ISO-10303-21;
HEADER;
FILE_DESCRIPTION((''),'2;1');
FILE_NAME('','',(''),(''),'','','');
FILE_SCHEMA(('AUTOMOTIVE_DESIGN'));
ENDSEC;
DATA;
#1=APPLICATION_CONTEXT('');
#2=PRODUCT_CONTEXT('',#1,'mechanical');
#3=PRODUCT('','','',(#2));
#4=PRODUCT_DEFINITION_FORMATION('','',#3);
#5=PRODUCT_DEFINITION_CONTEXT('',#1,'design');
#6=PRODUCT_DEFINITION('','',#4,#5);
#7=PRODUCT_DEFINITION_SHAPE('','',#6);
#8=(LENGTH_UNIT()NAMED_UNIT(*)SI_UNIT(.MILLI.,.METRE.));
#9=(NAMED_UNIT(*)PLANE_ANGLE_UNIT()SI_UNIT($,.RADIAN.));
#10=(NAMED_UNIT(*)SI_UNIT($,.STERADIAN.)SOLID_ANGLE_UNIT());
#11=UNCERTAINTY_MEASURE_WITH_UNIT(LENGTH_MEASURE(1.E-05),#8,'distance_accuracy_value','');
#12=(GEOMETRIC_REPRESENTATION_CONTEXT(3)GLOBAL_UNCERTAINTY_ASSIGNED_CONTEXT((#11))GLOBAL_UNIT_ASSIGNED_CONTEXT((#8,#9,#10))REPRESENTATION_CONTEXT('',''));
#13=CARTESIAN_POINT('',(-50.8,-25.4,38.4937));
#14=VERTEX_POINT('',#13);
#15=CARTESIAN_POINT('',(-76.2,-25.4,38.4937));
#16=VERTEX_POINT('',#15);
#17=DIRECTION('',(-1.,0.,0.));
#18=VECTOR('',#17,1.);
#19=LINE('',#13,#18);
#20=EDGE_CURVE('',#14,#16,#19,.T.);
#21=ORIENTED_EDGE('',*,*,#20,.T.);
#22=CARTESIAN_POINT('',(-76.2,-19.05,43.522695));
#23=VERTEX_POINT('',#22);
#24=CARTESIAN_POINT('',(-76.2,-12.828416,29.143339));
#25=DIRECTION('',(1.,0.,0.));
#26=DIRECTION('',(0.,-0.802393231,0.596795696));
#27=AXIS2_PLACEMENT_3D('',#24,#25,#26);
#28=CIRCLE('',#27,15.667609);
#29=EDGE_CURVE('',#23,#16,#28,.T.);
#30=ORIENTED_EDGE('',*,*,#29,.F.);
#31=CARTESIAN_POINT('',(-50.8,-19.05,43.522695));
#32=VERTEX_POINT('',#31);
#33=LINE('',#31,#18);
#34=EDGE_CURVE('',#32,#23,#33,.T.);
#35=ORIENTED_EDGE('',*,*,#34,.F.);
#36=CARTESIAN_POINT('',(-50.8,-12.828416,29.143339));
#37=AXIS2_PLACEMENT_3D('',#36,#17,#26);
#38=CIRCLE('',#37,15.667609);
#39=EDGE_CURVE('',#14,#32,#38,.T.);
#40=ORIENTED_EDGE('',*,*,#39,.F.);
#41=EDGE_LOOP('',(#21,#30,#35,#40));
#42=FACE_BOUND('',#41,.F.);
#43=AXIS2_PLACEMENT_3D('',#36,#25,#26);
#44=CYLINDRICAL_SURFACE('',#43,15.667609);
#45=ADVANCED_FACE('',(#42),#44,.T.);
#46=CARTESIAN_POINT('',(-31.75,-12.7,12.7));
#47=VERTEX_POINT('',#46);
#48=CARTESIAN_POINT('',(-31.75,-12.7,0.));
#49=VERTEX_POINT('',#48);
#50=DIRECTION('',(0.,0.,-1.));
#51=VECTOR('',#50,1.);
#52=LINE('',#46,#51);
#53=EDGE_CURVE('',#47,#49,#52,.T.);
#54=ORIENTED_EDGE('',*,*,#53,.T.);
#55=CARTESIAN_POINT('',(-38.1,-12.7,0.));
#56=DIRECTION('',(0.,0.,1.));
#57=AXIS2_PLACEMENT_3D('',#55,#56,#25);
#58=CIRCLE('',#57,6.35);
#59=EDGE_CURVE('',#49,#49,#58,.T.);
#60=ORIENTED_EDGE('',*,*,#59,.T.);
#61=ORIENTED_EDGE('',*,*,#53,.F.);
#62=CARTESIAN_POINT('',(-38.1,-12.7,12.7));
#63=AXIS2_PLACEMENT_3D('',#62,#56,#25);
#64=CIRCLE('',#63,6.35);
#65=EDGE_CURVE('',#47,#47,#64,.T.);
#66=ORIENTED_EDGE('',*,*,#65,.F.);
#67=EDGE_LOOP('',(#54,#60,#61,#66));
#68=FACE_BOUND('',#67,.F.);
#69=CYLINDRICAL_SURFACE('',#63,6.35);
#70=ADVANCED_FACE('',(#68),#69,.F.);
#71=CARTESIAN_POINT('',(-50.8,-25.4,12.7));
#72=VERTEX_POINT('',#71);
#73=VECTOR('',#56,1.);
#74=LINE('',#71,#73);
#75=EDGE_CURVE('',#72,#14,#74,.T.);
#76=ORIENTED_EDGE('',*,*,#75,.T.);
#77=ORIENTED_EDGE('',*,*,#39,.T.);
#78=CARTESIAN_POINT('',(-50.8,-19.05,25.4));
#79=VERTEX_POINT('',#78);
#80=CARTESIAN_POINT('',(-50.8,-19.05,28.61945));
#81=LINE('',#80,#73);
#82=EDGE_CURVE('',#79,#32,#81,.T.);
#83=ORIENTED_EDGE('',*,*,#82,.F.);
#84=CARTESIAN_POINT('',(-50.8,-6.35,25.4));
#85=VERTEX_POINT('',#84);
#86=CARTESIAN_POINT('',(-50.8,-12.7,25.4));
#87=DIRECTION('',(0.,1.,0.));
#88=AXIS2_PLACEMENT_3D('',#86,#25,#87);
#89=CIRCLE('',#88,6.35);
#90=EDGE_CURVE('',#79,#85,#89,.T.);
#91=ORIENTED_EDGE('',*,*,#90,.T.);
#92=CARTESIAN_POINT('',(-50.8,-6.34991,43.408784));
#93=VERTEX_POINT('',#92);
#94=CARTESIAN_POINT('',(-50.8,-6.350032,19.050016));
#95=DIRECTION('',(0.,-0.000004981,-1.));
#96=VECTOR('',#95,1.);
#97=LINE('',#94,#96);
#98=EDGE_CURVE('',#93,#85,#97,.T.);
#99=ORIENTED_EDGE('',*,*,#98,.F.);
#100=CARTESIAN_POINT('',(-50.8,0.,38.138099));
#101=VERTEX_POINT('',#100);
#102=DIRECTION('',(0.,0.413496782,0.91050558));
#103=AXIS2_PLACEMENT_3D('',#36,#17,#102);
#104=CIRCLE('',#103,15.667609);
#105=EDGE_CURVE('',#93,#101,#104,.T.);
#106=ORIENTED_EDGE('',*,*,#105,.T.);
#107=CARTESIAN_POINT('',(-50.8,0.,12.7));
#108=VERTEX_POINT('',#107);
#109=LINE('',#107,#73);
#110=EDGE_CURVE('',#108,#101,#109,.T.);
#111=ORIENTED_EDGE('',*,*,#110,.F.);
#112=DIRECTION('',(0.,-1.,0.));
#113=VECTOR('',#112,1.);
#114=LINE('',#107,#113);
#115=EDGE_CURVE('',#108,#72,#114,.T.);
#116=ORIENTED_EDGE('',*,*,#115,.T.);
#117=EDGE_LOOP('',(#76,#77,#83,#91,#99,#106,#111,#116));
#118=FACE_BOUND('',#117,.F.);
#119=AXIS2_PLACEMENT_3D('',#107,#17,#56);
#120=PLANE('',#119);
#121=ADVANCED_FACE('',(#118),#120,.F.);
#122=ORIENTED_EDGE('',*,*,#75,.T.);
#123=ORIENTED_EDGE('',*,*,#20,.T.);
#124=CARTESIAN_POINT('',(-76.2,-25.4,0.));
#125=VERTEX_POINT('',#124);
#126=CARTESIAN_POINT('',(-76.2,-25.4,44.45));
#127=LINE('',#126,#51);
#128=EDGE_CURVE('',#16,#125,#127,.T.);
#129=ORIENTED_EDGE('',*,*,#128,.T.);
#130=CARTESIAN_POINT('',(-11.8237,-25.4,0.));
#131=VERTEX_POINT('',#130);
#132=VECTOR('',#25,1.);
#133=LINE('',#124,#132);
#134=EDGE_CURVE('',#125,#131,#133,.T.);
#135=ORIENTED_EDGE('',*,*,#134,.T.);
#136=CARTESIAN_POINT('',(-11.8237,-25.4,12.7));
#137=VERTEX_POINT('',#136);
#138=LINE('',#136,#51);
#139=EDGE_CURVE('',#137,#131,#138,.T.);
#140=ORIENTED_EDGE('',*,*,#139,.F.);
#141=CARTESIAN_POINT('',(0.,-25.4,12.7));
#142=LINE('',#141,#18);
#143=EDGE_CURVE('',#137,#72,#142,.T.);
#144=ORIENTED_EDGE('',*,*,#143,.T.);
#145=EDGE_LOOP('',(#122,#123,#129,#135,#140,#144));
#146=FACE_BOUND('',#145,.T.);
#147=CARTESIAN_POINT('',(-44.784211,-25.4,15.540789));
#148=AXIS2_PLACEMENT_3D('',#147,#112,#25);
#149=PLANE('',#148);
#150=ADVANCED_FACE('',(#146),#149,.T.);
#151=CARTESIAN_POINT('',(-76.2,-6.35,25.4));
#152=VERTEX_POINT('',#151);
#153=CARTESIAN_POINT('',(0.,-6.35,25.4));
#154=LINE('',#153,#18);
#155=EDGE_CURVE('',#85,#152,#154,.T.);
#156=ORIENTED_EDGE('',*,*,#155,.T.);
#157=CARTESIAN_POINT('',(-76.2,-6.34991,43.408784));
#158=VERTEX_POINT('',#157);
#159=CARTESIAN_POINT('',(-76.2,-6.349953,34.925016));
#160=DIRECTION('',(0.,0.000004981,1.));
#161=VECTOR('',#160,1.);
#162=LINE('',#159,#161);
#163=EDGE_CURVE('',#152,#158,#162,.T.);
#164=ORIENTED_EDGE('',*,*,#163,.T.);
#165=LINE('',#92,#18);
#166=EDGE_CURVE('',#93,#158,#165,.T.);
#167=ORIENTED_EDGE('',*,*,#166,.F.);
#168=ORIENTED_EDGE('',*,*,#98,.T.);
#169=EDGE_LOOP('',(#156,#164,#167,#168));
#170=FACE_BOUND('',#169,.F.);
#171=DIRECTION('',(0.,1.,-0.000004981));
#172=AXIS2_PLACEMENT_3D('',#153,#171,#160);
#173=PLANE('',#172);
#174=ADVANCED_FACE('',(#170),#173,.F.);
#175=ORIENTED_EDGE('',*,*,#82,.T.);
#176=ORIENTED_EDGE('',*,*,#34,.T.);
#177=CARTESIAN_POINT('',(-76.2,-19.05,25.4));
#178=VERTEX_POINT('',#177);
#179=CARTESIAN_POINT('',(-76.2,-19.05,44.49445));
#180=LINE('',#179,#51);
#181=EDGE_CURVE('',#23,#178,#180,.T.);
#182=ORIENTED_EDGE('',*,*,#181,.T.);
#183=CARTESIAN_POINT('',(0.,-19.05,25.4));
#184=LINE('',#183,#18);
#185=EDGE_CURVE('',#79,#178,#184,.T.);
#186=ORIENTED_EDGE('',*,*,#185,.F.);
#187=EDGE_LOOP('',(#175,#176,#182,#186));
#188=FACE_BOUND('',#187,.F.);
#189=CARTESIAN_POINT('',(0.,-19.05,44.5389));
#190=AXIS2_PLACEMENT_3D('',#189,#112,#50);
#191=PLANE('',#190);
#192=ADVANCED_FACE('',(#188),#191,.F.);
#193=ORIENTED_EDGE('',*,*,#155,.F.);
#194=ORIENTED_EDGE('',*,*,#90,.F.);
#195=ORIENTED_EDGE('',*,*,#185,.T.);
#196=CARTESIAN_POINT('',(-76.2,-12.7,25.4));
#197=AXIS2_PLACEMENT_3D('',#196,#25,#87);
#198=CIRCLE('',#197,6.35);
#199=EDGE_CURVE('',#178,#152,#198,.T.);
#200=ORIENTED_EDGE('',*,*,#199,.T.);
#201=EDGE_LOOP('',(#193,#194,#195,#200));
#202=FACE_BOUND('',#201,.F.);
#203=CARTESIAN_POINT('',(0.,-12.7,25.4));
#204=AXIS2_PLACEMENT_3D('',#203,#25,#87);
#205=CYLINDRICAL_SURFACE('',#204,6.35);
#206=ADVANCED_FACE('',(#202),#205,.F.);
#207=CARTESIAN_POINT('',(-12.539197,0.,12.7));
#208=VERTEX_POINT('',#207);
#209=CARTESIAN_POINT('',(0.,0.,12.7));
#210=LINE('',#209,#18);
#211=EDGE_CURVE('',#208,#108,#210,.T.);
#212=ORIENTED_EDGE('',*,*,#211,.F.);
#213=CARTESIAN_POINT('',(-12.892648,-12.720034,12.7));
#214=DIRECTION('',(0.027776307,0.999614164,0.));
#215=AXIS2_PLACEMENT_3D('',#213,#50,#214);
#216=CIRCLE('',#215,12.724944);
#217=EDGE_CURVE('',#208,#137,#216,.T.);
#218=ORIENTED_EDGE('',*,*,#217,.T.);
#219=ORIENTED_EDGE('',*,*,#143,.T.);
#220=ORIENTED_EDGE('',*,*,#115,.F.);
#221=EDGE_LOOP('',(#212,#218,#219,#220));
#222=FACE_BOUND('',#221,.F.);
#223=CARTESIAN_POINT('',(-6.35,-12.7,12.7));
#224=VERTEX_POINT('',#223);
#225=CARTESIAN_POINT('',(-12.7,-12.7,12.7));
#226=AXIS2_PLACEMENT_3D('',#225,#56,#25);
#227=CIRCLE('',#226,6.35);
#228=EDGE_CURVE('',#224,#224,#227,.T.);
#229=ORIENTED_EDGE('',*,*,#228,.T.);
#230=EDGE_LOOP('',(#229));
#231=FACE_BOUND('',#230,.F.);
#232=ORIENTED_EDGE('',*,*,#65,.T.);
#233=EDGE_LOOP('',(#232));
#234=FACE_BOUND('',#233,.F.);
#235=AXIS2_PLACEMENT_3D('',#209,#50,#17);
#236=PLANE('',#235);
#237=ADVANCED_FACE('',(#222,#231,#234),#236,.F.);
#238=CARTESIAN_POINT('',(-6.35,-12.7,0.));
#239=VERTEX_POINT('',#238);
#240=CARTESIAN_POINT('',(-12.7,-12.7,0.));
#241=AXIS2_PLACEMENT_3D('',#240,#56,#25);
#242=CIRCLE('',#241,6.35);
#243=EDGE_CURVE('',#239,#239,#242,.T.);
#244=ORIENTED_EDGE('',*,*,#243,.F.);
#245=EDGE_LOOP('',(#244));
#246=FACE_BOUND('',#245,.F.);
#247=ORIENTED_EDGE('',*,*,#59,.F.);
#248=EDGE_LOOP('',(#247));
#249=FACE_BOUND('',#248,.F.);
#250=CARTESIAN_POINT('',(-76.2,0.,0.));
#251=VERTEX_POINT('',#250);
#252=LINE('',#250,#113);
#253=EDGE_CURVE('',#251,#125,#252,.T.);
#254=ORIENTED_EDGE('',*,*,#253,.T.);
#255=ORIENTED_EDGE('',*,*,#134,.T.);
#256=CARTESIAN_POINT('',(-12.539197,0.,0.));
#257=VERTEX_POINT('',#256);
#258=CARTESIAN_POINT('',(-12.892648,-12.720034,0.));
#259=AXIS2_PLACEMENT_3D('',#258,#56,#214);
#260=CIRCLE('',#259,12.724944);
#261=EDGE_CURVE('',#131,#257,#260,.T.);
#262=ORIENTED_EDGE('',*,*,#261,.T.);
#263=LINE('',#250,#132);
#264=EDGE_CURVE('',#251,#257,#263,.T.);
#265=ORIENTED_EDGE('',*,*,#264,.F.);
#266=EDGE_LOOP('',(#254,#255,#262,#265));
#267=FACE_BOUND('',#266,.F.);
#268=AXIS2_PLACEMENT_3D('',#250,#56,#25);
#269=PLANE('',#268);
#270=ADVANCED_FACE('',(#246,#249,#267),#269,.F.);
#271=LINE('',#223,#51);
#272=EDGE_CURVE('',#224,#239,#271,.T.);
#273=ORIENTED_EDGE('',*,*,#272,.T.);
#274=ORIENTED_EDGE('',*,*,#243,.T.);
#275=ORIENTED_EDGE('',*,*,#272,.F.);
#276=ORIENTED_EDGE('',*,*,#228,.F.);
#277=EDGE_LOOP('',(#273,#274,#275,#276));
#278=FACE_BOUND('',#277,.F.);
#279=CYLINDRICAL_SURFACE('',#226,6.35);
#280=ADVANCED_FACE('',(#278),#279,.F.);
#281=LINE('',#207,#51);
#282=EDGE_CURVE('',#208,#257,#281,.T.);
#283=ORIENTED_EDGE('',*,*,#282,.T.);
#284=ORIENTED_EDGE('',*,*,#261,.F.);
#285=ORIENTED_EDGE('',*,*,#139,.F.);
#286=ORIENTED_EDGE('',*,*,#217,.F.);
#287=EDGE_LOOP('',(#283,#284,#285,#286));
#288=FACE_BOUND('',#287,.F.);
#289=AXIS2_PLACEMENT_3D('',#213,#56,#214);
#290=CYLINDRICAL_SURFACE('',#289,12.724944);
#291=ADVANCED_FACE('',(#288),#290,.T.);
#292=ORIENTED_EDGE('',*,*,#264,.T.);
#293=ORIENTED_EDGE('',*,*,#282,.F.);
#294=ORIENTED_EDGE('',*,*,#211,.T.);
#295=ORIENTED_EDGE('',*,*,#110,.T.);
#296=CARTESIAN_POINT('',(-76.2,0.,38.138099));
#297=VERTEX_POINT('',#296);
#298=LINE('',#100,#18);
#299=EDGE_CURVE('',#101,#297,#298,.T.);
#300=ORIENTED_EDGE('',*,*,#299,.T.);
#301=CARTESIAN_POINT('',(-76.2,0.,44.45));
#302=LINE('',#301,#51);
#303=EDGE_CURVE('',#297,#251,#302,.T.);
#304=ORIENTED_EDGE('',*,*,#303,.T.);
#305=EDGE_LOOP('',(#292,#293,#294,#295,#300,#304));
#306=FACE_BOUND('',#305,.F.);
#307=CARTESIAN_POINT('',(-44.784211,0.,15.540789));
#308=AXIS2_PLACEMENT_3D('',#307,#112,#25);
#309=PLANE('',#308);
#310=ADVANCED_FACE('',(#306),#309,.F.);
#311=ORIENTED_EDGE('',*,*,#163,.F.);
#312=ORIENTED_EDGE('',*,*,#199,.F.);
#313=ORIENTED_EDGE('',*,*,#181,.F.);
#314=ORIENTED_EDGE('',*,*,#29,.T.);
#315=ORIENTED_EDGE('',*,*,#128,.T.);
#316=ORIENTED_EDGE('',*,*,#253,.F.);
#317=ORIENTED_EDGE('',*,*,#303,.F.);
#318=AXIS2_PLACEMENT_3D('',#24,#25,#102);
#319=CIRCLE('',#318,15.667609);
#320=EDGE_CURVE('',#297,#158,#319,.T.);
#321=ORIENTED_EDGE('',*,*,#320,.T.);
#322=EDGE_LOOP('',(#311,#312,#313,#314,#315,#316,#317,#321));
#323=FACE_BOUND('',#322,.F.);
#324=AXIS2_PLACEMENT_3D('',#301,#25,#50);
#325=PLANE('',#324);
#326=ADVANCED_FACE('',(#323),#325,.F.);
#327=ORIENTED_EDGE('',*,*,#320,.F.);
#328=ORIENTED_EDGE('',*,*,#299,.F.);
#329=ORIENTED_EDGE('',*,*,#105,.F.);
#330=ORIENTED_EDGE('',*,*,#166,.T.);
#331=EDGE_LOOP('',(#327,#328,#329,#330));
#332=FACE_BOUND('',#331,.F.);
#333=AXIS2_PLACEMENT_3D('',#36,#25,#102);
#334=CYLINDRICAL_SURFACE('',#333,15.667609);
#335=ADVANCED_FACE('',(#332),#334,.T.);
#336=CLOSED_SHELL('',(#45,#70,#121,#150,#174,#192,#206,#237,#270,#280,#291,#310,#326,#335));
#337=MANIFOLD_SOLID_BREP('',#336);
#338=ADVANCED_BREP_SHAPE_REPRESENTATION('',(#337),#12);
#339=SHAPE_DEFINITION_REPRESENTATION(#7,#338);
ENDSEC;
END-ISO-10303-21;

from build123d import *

# Parameters (mm, degrees)
F1_DEPTH = 25.4
F2_R     = 6.35
F3_DEPTH = 25.4
F5_DEPTH = 76.201
F7_DEPTH = 25.401
F9_DEPTH = 12.701


# Not quite as in the source:
# - ends of sketch curves that miss each other by under 0.0002 mm in the source are joined


with BuildPart() as f1:
    # F0 (on Front) → F1 (new body)
    with BuildSketch(Plane.XZ):
        Polygon((-50.8, 44.45), (-76.2, 44.45), (-76.2, 0), (0, 0), (0, 12.7), (-50.8, 12.7), align=None)
    extrude(amount=F1_DEPTH)

    # F2 (on face) → F3 (cut)
    with BuildSketch(Plane.XY.offset(12.7)):
        with Locations((-38.1, -12.7)):
            Circle(F2_R)
        with Locations((-12.7, -12.7)):
            Circle(F2_R)
    extrude(amount=-F3_DEPTH, mode=Mode.SUBTRACT)

    # F4 (on Right) → F5 (cut, through all)
    with BuildSketch(Plane.YZ):
        with BuildLine():
            ThreePointArc((-19.05, 25.4), (-12.7, 19.05), (-6.35, 25.4))
            ThreePointArc((-6.35, 25.4), (-12.7, 31.75), (-19.05, 25.4))
        make_face()
        with BuildLine():
            ThreePointArc((-19.05, 25.4), (-12.7, 31.75), (-6.35, 25.4))
            Line((-6.35, 25.4), (-6.3499049408, 44.4847454087))
            Line((-6.3499049408, 44.4847454087), (-19.05, 44.5389002562))
            Line((-19.05, 44.5389002562), (-19.05, 25.4))
        make_face()
    extrude(amount=-F5_DEPTH, mode=Mode.SUBTRACT)

    # F6 (on face) → F7 (cut, through all)
    with BuildSketch(Plane.YZ.offset(-50.8)):
        with BuildLine():
            ThreePointArc((-25.4, 38.4937003255), (-22.5556194367, 41.4256632835), (-19.05, 43.5226945042))
            Line((-19.05, 43.5226945042), (-19.05, 44.45))
            Line((-19.05, 44.45), (-25.4, 44.45))
            Line((-25.4, 44.45), (-25.4, 38.4937003255))
        make_face()
        with BuildLine():
            ThreePointArc((-6.3499103, 43.4087842374), (-2.8217014128, 41.1990275697), (0, 38.1380990148))
            Line((0, 38.1380990148), (0, 44.45))
            Line((0, 44.45), (-6.3499051138, 44.45))
            Line((-6.3499051138, 44.45), (-6.3499103, 43.4087842374))
        make_face()
    extrude(amount=-F7_DEPTH, mode=Mode.SUBTRACT)

    # F8 (on face) → F9 (cut, through all)
    with BuildSketch(Plane.XY.offset(12.7)):
        with BuildLine():
            ThreePointArc((-12.5391965152, 0), (-0.172750427, -12.3617250524), (-11.8236998096, -25.4))
            Line((-11.8236998096, -25.4), (0, -25.4))
            Line((0, -25.4), (0, 0))
            Line((0, 0), (-12.5391965152, 0))
        make_face()
    extrude(amount=-F9_DEPTH, mode=Mode.SUBTRACT)


solid = f1.part
